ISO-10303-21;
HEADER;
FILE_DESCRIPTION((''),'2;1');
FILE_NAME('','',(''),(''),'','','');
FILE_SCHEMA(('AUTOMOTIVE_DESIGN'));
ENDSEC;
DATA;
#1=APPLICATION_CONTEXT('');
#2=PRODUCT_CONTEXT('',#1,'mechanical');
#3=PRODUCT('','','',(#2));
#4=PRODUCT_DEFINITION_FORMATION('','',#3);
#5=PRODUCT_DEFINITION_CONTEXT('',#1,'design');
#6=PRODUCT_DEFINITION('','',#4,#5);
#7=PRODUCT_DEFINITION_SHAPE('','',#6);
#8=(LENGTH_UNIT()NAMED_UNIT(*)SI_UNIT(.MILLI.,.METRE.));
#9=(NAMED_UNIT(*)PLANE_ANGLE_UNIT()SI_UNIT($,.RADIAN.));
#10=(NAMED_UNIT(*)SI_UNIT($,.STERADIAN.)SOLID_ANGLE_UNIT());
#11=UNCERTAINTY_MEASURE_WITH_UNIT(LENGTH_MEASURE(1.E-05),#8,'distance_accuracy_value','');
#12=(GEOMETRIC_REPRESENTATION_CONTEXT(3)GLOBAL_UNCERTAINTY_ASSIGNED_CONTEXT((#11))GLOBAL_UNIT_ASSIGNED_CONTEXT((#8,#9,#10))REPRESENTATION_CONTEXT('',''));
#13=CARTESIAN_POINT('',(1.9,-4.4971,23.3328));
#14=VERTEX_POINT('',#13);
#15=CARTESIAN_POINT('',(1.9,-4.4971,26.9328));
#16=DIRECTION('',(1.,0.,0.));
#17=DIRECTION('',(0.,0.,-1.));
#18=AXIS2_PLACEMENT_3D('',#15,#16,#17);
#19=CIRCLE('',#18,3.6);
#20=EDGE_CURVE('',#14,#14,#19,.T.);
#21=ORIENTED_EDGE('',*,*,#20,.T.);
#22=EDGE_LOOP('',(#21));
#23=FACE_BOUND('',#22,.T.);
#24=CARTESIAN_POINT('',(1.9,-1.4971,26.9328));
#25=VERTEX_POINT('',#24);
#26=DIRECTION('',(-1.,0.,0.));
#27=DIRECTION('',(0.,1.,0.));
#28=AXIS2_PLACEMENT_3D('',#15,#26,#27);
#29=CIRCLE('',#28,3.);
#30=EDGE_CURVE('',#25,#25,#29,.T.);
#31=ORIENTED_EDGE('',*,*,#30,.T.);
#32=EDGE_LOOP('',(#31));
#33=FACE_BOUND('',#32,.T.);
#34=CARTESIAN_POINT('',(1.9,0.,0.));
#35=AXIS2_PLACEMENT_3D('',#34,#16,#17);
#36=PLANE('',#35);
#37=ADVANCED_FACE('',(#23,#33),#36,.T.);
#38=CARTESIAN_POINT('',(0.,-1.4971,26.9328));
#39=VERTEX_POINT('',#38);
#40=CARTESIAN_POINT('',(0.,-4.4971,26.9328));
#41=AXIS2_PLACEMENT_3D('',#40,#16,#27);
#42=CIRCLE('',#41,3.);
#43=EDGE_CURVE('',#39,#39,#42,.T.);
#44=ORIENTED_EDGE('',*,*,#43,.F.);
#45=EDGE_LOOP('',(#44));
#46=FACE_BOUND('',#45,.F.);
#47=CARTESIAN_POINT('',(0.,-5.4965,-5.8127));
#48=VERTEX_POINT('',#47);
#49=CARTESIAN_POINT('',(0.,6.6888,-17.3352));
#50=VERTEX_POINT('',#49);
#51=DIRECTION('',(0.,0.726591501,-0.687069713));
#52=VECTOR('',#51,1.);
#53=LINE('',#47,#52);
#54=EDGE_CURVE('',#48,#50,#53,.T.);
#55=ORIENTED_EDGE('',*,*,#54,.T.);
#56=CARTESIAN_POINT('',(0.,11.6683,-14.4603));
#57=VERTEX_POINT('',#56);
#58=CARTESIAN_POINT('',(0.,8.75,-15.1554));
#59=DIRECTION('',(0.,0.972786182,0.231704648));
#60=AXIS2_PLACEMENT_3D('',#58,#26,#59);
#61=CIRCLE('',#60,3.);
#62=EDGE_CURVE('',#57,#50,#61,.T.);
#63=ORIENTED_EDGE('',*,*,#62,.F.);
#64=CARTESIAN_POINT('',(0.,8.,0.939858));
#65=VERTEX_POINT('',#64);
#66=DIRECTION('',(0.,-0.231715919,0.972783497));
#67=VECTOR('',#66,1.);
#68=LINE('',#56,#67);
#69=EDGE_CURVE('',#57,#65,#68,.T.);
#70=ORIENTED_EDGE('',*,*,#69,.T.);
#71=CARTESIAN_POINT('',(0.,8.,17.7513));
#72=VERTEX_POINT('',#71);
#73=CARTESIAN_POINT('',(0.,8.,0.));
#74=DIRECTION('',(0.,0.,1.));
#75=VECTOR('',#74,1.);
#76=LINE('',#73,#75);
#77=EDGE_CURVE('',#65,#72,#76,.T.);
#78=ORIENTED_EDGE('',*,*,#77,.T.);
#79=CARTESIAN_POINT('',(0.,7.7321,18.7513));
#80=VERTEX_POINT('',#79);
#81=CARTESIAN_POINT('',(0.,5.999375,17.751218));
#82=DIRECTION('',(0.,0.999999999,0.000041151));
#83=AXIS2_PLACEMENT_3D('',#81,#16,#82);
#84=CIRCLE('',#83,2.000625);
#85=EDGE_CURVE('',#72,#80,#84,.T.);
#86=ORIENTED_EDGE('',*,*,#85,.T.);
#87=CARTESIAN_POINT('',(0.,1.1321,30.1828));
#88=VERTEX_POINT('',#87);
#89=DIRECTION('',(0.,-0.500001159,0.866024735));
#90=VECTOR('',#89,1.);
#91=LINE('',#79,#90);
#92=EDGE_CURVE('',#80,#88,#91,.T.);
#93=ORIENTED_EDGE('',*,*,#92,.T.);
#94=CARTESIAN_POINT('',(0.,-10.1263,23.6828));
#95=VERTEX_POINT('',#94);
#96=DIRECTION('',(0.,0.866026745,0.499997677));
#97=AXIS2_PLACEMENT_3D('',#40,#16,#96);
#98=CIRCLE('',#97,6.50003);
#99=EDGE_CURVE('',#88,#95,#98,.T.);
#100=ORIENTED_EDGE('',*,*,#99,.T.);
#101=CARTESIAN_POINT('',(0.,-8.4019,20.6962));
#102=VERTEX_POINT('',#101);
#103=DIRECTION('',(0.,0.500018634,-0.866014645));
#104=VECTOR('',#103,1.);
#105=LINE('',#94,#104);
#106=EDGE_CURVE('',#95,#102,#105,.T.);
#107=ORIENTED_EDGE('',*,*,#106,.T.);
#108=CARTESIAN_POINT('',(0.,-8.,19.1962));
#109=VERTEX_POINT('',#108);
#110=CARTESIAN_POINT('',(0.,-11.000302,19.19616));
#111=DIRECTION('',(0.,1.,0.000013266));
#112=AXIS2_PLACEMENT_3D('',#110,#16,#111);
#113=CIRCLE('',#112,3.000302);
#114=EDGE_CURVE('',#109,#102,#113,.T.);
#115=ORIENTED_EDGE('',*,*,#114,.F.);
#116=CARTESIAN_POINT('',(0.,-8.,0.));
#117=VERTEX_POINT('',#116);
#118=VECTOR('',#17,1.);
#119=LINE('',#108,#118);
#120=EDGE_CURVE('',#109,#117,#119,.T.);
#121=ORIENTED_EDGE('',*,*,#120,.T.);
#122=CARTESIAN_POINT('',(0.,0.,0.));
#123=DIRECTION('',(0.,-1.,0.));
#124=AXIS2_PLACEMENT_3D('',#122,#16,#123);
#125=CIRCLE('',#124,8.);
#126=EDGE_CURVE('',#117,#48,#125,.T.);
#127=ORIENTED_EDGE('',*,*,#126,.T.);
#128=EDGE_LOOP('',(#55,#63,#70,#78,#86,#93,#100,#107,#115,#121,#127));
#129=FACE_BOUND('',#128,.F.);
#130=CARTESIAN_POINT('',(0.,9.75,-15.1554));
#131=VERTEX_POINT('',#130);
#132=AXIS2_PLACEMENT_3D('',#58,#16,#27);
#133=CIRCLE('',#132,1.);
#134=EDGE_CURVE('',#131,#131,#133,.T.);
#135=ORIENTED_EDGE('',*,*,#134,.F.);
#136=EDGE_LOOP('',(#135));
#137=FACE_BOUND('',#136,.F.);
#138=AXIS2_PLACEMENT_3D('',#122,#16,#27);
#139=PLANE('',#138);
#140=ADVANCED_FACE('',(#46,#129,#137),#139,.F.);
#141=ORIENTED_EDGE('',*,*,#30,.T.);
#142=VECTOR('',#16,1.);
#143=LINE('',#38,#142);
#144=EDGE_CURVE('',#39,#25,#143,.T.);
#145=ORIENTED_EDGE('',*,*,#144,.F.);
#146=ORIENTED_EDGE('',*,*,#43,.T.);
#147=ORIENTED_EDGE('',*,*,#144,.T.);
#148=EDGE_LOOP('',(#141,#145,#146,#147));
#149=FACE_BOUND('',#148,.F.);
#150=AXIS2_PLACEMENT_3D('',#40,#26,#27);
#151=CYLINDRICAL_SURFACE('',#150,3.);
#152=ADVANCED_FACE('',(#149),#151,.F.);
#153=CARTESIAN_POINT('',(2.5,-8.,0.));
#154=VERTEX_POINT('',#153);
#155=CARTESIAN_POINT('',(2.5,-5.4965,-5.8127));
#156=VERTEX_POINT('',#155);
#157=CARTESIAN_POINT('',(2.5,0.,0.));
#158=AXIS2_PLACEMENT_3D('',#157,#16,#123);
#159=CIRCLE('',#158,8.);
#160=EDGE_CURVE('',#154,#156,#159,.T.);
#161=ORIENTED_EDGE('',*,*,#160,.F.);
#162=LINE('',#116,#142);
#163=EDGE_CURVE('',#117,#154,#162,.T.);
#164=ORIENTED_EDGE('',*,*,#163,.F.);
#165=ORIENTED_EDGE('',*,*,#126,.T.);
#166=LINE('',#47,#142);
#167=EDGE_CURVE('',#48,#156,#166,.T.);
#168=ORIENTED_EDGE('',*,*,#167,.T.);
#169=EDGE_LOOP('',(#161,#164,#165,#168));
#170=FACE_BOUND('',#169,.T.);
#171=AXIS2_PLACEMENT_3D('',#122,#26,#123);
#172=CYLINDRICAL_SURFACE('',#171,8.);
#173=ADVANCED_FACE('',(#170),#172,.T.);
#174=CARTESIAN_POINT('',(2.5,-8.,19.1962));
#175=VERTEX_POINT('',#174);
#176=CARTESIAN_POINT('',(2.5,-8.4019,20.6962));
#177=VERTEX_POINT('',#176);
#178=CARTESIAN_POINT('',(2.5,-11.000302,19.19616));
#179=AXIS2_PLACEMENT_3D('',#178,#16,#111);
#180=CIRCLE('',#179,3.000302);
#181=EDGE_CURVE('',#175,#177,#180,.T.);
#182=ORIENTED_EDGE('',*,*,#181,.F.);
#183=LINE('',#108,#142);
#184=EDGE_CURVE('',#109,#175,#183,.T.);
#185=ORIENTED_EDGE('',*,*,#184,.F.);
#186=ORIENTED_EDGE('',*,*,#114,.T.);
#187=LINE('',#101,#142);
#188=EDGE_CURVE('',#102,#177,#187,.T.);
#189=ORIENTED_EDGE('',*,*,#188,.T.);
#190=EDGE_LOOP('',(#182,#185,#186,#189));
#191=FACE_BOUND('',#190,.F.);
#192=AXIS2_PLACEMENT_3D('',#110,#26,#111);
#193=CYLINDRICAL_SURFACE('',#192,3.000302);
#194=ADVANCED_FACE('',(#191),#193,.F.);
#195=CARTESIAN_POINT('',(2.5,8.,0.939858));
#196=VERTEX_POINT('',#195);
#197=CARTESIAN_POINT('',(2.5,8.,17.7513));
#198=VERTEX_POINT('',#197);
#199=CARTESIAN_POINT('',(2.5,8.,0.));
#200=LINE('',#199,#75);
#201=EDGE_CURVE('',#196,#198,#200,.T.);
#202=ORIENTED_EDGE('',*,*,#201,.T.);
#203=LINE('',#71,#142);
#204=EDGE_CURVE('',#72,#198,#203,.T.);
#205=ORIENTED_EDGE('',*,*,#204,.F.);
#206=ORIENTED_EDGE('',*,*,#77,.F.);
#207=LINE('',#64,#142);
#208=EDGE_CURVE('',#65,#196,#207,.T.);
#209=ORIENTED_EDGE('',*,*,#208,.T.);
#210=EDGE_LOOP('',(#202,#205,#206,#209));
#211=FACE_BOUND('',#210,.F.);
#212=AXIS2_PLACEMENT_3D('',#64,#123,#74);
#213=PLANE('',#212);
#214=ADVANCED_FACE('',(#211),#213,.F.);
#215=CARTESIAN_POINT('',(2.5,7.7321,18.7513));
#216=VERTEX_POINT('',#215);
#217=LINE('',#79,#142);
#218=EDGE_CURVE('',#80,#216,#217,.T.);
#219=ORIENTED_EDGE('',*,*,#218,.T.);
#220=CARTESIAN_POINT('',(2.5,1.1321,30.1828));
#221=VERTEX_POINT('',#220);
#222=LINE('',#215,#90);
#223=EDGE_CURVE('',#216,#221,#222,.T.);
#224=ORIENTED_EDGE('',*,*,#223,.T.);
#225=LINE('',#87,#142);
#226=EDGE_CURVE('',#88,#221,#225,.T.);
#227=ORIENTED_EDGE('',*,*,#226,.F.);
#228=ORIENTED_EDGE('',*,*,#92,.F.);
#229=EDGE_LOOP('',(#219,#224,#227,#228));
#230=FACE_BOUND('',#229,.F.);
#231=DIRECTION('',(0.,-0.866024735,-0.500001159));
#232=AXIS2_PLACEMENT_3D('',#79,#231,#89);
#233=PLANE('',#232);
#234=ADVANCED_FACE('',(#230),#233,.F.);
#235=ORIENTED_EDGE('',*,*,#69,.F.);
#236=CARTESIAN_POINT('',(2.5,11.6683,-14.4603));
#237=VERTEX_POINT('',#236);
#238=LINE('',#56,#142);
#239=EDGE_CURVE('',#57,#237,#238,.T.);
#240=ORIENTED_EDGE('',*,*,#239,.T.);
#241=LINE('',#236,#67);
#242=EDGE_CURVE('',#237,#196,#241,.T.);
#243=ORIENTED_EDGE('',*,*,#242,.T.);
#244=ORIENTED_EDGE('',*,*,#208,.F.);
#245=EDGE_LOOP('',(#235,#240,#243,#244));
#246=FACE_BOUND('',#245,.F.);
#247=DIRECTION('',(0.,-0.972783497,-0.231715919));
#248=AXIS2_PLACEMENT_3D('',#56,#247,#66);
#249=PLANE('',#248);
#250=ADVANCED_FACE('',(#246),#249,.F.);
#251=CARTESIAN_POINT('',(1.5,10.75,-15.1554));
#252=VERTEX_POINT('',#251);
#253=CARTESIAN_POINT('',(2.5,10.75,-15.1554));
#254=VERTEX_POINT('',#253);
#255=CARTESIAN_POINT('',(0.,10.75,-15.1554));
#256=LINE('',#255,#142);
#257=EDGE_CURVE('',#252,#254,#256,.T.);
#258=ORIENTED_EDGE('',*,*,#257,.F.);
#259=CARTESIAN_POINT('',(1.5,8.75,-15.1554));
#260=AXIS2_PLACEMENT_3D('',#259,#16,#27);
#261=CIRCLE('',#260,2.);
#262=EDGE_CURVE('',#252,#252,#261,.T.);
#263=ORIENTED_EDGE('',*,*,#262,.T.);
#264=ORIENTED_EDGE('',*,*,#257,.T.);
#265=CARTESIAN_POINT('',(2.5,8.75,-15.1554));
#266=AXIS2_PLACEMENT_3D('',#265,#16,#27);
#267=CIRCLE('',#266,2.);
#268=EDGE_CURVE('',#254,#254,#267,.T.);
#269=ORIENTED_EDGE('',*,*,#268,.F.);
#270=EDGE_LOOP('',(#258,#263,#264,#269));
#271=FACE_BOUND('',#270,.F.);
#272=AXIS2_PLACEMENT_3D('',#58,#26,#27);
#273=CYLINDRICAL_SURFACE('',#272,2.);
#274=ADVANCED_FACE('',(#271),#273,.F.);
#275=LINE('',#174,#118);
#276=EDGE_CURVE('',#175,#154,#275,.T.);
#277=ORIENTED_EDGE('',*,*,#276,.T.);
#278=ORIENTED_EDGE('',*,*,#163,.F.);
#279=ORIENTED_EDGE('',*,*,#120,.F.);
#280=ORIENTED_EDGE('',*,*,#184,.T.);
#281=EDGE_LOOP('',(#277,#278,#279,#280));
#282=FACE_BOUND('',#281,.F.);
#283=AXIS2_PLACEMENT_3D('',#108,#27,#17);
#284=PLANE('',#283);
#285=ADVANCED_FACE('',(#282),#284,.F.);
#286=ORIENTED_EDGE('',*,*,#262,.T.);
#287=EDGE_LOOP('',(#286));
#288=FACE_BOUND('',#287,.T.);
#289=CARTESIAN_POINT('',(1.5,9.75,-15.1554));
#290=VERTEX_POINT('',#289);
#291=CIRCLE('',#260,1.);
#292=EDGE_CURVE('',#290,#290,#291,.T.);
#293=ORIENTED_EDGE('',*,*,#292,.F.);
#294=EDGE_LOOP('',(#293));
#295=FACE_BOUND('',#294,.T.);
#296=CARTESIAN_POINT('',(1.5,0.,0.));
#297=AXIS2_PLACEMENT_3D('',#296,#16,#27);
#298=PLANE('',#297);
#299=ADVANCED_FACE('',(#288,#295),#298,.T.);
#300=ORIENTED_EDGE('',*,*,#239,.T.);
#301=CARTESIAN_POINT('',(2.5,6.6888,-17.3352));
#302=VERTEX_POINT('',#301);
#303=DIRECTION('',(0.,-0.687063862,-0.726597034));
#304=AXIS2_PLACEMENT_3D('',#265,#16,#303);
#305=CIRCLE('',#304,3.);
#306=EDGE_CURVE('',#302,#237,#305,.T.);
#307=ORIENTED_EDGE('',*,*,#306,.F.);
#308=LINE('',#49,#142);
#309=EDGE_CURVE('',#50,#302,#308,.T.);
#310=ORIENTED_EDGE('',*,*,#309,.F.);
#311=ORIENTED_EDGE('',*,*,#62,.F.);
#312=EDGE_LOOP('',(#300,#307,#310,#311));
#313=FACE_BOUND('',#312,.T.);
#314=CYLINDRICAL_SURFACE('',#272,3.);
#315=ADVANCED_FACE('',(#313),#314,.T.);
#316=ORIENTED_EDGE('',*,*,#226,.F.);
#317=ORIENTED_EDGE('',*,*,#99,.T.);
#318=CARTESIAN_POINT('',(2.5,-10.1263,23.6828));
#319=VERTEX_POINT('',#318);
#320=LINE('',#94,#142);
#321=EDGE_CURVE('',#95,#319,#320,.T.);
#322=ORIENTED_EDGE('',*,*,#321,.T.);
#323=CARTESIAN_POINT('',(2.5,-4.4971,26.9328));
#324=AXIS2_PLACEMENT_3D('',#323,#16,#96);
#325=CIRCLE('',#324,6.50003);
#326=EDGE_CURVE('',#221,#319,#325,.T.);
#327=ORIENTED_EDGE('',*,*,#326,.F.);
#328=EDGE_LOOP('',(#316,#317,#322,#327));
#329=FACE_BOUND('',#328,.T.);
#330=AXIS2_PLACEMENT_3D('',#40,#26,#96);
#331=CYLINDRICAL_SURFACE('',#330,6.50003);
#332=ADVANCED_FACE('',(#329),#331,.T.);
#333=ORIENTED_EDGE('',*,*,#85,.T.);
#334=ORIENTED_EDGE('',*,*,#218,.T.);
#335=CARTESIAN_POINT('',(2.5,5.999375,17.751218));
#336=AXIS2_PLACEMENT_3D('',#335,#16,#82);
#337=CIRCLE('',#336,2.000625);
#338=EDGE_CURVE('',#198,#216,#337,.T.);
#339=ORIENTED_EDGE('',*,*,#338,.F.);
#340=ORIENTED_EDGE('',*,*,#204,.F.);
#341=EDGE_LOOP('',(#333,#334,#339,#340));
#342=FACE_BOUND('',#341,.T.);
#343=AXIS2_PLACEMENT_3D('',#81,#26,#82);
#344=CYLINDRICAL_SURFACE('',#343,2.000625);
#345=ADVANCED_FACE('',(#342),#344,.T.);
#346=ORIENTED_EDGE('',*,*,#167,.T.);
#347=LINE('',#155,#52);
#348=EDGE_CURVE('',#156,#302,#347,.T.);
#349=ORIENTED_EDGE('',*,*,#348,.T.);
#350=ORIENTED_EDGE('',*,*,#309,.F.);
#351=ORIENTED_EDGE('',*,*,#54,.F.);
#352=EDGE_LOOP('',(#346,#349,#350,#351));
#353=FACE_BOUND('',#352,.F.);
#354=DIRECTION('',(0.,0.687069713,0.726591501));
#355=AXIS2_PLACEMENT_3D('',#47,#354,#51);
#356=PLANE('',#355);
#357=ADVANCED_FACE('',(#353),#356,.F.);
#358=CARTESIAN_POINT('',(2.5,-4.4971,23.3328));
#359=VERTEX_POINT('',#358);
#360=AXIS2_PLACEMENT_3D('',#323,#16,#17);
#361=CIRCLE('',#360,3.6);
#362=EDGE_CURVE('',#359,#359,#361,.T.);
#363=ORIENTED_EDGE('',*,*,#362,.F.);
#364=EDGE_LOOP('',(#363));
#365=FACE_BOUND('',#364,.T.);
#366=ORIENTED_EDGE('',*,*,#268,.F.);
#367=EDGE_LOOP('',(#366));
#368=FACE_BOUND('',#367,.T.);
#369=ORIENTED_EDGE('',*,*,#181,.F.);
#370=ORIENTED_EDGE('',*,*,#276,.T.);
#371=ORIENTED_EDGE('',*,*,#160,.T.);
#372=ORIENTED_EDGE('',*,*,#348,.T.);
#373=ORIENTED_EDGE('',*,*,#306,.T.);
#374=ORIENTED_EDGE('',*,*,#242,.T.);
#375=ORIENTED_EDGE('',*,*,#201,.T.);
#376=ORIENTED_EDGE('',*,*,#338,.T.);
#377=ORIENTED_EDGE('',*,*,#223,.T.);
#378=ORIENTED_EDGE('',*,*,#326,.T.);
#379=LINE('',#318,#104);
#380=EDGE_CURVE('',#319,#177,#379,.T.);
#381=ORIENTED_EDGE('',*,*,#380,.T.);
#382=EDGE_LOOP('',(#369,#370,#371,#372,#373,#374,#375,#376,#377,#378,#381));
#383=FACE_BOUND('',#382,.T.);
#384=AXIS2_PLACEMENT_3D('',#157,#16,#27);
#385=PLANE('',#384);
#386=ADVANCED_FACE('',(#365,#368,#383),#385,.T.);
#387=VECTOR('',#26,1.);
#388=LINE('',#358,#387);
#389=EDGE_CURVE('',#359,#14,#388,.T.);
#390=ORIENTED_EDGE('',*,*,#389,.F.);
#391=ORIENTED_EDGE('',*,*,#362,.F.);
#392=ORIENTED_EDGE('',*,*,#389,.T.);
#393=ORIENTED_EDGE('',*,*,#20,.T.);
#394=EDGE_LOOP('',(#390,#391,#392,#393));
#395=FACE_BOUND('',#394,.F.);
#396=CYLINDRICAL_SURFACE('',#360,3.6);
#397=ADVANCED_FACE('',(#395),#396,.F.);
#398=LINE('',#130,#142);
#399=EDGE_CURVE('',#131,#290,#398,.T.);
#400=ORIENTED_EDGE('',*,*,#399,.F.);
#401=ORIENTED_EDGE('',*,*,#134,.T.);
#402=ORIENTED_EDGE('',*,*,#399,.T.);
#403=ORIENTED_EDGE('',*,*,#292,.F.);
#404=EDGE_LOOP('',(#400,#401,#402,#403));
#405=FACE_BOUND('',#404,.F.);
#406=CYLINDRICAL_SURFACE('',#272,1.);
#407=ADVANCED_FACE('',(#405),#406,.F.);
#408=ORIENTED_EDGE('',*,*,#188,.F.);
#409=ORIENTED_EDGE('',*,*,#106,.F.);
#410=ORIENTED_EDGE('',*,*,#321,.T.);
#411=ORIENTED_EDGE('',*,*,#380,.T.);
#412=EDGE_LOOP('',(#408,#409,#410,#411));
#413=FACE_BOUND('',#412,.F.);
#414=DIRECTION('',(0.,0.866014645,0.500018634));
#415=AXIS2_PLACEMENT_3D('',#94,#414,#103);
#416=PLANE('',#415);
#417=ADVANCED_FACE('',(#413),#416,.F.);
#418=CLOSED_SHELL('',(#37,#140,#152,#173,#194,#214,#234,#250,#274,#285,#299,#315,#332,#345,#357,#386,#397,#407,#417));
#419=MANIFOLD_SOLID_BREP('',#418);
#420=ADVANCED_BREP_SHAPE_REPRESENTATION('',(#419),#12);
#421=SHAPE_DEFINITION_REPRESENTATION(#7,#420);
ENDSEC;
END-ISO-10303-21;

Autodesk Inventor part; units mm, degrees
ref_plane "YZ Plane" through (0, 0, 0) normal (1, 0, 0) x (0, 1, 0)
ref_plane "XZ Plane" through (0, 0, 0) normal (0, 1, 0) x (-1, 0, 0)
ref_plane "XY Plane" through (0, 0, 0) normal (0, 0, 1) x (1, 0, 0)
sketch "スケッチ1" plane through (0, 0, 0) normal (1, 0, 0) x (0, 1, 0)
  circle A0 centre (-4.4971, 26.9328) radius 3.6
  circle A1 centre (-4.4971, 26.9328) radius 3
  arc A2 (1.1321, 30.1828) -> (-10.1263, 23.6828) centre (-4.4971, 26.9328) ccw
  line L0 (-10.1263, 23.6828) -> (-8.4019, 20.6962)
  line L1 (-8, 19.1962) -> (-8, 0)
  line L2 (8, 0) -> (8, 17.7513)
  line L3 (7.7321, 18.7513) -> (1.1321, 30.1828)
  arc A3 (8, 17.7513) -> (7.7321, 18.7513) centre (6, 17.7513) ccw
  arc A4 (-8, 0) -> (8, 0) centre (0, 0) ccw
  circle A5 centre (0, 0) radius 2
  line L4 (-8, 20) -> (-8, 0) construction
  line L5 (-8, 0) -> (0, 0) construction
  line L6 (0, -28.9489) -> (0, 46.6055) construction
  arc A6 (-8, 19.1962) -> (-8.4019, 20.6962) centre (-11, 19.1962) ccw
  circle A7 centre (8.75, -15.1554) radius 3
  line L7 (0, 0) -> (8.75, -15.1554) construction
  circle A8 centre (0, 0) radius 8 construction
  line L8 (-5.4965, -5.8127) -> (6.6888, -17.3352)
  line L9 (11.6683, -14.4603) -> (7.7823, 1.8538)
  circle A9 centre (8.75, -15.1554) radius 2
  circle A10 centre (8.75, -15.1554) radius 1
  circle A11 centre (-4.4971, 26.9328) radius 5.5 construction
  line L10 (0.9991, 27.1358) -> (1.9986, 0.0738) construction
  line L11 (-9.7612, 25.3391) -> (-1.9142, -0.5795) construction
  point P0 (8, 18.2872)
  point P1 (8, 0.9397)
  point P2 (-5.4965, -5.8127)
  dimension "d0" = 6
  dimension "d1" = 7.2
  dimension "d2" = 6.5
  dimension "d9" = 2
  dimension "d13" = 150
  dimension "d14" = 8
  dimension "d15" = 4
  dimension "d18" = 13.2
  dimension "d19" = 8
  dimension "d20" = 20
  dimension "d26" = 3
  dimension "d55" = 6
  dimension "d56" = 17.5
  dimension "d58" = 30
  dimension "d59" = 16
  dimension "d60" = 4
  dimension "d61" = 2
  dimension "d75" = 11
extrude "押し出し3" add sketch "スケッチ1" along normal blind 2.5 contours A0 | L3 A3 L2 A4 L1 A6 L0 A2 | L9 A7 L8 A4 L2 | A7 | A5
sketch "スケッチ2" plane through (2.5, 0, 0) normal (1, 0, 0) x (0, 0, -1)
  line L0 (-0.9397, 8) -> (-17.7513, 8) projected
  arc A0 (-17.7513, 8) -> (-18.7513, 7.7321) centre (-17.7513, 6) ccw projected
  line L1 (-18.7513, 7.7321) -> (-30.1828, 1.1321) projected
  arc A1 (-30.1828, 1.1321) -> (-23.6828, -10.1263) centre (-26.9328, -4.4971) ccw projected
  line L2 (-23.6828, -10.1263) -> (-20.6962, -8.4019) projected
  arc A2 (-19.1962, -8) -> (-20.6962, -8.4019) centre (-19.1962, -11) ccw projected
  line L3 (-19.1962, -8) -> (0, -8) projected
  arc A3 (0, -8) -> (5.8127, -5.4965) centre (0, 0) ccw projected
  circle A4 centre (-26.9328, -4.4971) radius 3.6
  line L4 (5.8127, -5.4965) -> (17.3352, 6.6888) projected
  arc A5 (17.3352, 6.6888) -> (14.4603, 11.6683) centre (15.1554, 8.75) ccw projected
  line L5 (14.4603, 11.6683) -> (-0.9397, 8) projected
  dimension "d32" = 7.2
extrude "押し出し4" cut sketch "スケッチ2" against normal blind 0.6 contours A4
extrude "押し出し5" add sketch "スケッチ1" along normal blind 1.5 contours A9
properties part number "GearCover"
